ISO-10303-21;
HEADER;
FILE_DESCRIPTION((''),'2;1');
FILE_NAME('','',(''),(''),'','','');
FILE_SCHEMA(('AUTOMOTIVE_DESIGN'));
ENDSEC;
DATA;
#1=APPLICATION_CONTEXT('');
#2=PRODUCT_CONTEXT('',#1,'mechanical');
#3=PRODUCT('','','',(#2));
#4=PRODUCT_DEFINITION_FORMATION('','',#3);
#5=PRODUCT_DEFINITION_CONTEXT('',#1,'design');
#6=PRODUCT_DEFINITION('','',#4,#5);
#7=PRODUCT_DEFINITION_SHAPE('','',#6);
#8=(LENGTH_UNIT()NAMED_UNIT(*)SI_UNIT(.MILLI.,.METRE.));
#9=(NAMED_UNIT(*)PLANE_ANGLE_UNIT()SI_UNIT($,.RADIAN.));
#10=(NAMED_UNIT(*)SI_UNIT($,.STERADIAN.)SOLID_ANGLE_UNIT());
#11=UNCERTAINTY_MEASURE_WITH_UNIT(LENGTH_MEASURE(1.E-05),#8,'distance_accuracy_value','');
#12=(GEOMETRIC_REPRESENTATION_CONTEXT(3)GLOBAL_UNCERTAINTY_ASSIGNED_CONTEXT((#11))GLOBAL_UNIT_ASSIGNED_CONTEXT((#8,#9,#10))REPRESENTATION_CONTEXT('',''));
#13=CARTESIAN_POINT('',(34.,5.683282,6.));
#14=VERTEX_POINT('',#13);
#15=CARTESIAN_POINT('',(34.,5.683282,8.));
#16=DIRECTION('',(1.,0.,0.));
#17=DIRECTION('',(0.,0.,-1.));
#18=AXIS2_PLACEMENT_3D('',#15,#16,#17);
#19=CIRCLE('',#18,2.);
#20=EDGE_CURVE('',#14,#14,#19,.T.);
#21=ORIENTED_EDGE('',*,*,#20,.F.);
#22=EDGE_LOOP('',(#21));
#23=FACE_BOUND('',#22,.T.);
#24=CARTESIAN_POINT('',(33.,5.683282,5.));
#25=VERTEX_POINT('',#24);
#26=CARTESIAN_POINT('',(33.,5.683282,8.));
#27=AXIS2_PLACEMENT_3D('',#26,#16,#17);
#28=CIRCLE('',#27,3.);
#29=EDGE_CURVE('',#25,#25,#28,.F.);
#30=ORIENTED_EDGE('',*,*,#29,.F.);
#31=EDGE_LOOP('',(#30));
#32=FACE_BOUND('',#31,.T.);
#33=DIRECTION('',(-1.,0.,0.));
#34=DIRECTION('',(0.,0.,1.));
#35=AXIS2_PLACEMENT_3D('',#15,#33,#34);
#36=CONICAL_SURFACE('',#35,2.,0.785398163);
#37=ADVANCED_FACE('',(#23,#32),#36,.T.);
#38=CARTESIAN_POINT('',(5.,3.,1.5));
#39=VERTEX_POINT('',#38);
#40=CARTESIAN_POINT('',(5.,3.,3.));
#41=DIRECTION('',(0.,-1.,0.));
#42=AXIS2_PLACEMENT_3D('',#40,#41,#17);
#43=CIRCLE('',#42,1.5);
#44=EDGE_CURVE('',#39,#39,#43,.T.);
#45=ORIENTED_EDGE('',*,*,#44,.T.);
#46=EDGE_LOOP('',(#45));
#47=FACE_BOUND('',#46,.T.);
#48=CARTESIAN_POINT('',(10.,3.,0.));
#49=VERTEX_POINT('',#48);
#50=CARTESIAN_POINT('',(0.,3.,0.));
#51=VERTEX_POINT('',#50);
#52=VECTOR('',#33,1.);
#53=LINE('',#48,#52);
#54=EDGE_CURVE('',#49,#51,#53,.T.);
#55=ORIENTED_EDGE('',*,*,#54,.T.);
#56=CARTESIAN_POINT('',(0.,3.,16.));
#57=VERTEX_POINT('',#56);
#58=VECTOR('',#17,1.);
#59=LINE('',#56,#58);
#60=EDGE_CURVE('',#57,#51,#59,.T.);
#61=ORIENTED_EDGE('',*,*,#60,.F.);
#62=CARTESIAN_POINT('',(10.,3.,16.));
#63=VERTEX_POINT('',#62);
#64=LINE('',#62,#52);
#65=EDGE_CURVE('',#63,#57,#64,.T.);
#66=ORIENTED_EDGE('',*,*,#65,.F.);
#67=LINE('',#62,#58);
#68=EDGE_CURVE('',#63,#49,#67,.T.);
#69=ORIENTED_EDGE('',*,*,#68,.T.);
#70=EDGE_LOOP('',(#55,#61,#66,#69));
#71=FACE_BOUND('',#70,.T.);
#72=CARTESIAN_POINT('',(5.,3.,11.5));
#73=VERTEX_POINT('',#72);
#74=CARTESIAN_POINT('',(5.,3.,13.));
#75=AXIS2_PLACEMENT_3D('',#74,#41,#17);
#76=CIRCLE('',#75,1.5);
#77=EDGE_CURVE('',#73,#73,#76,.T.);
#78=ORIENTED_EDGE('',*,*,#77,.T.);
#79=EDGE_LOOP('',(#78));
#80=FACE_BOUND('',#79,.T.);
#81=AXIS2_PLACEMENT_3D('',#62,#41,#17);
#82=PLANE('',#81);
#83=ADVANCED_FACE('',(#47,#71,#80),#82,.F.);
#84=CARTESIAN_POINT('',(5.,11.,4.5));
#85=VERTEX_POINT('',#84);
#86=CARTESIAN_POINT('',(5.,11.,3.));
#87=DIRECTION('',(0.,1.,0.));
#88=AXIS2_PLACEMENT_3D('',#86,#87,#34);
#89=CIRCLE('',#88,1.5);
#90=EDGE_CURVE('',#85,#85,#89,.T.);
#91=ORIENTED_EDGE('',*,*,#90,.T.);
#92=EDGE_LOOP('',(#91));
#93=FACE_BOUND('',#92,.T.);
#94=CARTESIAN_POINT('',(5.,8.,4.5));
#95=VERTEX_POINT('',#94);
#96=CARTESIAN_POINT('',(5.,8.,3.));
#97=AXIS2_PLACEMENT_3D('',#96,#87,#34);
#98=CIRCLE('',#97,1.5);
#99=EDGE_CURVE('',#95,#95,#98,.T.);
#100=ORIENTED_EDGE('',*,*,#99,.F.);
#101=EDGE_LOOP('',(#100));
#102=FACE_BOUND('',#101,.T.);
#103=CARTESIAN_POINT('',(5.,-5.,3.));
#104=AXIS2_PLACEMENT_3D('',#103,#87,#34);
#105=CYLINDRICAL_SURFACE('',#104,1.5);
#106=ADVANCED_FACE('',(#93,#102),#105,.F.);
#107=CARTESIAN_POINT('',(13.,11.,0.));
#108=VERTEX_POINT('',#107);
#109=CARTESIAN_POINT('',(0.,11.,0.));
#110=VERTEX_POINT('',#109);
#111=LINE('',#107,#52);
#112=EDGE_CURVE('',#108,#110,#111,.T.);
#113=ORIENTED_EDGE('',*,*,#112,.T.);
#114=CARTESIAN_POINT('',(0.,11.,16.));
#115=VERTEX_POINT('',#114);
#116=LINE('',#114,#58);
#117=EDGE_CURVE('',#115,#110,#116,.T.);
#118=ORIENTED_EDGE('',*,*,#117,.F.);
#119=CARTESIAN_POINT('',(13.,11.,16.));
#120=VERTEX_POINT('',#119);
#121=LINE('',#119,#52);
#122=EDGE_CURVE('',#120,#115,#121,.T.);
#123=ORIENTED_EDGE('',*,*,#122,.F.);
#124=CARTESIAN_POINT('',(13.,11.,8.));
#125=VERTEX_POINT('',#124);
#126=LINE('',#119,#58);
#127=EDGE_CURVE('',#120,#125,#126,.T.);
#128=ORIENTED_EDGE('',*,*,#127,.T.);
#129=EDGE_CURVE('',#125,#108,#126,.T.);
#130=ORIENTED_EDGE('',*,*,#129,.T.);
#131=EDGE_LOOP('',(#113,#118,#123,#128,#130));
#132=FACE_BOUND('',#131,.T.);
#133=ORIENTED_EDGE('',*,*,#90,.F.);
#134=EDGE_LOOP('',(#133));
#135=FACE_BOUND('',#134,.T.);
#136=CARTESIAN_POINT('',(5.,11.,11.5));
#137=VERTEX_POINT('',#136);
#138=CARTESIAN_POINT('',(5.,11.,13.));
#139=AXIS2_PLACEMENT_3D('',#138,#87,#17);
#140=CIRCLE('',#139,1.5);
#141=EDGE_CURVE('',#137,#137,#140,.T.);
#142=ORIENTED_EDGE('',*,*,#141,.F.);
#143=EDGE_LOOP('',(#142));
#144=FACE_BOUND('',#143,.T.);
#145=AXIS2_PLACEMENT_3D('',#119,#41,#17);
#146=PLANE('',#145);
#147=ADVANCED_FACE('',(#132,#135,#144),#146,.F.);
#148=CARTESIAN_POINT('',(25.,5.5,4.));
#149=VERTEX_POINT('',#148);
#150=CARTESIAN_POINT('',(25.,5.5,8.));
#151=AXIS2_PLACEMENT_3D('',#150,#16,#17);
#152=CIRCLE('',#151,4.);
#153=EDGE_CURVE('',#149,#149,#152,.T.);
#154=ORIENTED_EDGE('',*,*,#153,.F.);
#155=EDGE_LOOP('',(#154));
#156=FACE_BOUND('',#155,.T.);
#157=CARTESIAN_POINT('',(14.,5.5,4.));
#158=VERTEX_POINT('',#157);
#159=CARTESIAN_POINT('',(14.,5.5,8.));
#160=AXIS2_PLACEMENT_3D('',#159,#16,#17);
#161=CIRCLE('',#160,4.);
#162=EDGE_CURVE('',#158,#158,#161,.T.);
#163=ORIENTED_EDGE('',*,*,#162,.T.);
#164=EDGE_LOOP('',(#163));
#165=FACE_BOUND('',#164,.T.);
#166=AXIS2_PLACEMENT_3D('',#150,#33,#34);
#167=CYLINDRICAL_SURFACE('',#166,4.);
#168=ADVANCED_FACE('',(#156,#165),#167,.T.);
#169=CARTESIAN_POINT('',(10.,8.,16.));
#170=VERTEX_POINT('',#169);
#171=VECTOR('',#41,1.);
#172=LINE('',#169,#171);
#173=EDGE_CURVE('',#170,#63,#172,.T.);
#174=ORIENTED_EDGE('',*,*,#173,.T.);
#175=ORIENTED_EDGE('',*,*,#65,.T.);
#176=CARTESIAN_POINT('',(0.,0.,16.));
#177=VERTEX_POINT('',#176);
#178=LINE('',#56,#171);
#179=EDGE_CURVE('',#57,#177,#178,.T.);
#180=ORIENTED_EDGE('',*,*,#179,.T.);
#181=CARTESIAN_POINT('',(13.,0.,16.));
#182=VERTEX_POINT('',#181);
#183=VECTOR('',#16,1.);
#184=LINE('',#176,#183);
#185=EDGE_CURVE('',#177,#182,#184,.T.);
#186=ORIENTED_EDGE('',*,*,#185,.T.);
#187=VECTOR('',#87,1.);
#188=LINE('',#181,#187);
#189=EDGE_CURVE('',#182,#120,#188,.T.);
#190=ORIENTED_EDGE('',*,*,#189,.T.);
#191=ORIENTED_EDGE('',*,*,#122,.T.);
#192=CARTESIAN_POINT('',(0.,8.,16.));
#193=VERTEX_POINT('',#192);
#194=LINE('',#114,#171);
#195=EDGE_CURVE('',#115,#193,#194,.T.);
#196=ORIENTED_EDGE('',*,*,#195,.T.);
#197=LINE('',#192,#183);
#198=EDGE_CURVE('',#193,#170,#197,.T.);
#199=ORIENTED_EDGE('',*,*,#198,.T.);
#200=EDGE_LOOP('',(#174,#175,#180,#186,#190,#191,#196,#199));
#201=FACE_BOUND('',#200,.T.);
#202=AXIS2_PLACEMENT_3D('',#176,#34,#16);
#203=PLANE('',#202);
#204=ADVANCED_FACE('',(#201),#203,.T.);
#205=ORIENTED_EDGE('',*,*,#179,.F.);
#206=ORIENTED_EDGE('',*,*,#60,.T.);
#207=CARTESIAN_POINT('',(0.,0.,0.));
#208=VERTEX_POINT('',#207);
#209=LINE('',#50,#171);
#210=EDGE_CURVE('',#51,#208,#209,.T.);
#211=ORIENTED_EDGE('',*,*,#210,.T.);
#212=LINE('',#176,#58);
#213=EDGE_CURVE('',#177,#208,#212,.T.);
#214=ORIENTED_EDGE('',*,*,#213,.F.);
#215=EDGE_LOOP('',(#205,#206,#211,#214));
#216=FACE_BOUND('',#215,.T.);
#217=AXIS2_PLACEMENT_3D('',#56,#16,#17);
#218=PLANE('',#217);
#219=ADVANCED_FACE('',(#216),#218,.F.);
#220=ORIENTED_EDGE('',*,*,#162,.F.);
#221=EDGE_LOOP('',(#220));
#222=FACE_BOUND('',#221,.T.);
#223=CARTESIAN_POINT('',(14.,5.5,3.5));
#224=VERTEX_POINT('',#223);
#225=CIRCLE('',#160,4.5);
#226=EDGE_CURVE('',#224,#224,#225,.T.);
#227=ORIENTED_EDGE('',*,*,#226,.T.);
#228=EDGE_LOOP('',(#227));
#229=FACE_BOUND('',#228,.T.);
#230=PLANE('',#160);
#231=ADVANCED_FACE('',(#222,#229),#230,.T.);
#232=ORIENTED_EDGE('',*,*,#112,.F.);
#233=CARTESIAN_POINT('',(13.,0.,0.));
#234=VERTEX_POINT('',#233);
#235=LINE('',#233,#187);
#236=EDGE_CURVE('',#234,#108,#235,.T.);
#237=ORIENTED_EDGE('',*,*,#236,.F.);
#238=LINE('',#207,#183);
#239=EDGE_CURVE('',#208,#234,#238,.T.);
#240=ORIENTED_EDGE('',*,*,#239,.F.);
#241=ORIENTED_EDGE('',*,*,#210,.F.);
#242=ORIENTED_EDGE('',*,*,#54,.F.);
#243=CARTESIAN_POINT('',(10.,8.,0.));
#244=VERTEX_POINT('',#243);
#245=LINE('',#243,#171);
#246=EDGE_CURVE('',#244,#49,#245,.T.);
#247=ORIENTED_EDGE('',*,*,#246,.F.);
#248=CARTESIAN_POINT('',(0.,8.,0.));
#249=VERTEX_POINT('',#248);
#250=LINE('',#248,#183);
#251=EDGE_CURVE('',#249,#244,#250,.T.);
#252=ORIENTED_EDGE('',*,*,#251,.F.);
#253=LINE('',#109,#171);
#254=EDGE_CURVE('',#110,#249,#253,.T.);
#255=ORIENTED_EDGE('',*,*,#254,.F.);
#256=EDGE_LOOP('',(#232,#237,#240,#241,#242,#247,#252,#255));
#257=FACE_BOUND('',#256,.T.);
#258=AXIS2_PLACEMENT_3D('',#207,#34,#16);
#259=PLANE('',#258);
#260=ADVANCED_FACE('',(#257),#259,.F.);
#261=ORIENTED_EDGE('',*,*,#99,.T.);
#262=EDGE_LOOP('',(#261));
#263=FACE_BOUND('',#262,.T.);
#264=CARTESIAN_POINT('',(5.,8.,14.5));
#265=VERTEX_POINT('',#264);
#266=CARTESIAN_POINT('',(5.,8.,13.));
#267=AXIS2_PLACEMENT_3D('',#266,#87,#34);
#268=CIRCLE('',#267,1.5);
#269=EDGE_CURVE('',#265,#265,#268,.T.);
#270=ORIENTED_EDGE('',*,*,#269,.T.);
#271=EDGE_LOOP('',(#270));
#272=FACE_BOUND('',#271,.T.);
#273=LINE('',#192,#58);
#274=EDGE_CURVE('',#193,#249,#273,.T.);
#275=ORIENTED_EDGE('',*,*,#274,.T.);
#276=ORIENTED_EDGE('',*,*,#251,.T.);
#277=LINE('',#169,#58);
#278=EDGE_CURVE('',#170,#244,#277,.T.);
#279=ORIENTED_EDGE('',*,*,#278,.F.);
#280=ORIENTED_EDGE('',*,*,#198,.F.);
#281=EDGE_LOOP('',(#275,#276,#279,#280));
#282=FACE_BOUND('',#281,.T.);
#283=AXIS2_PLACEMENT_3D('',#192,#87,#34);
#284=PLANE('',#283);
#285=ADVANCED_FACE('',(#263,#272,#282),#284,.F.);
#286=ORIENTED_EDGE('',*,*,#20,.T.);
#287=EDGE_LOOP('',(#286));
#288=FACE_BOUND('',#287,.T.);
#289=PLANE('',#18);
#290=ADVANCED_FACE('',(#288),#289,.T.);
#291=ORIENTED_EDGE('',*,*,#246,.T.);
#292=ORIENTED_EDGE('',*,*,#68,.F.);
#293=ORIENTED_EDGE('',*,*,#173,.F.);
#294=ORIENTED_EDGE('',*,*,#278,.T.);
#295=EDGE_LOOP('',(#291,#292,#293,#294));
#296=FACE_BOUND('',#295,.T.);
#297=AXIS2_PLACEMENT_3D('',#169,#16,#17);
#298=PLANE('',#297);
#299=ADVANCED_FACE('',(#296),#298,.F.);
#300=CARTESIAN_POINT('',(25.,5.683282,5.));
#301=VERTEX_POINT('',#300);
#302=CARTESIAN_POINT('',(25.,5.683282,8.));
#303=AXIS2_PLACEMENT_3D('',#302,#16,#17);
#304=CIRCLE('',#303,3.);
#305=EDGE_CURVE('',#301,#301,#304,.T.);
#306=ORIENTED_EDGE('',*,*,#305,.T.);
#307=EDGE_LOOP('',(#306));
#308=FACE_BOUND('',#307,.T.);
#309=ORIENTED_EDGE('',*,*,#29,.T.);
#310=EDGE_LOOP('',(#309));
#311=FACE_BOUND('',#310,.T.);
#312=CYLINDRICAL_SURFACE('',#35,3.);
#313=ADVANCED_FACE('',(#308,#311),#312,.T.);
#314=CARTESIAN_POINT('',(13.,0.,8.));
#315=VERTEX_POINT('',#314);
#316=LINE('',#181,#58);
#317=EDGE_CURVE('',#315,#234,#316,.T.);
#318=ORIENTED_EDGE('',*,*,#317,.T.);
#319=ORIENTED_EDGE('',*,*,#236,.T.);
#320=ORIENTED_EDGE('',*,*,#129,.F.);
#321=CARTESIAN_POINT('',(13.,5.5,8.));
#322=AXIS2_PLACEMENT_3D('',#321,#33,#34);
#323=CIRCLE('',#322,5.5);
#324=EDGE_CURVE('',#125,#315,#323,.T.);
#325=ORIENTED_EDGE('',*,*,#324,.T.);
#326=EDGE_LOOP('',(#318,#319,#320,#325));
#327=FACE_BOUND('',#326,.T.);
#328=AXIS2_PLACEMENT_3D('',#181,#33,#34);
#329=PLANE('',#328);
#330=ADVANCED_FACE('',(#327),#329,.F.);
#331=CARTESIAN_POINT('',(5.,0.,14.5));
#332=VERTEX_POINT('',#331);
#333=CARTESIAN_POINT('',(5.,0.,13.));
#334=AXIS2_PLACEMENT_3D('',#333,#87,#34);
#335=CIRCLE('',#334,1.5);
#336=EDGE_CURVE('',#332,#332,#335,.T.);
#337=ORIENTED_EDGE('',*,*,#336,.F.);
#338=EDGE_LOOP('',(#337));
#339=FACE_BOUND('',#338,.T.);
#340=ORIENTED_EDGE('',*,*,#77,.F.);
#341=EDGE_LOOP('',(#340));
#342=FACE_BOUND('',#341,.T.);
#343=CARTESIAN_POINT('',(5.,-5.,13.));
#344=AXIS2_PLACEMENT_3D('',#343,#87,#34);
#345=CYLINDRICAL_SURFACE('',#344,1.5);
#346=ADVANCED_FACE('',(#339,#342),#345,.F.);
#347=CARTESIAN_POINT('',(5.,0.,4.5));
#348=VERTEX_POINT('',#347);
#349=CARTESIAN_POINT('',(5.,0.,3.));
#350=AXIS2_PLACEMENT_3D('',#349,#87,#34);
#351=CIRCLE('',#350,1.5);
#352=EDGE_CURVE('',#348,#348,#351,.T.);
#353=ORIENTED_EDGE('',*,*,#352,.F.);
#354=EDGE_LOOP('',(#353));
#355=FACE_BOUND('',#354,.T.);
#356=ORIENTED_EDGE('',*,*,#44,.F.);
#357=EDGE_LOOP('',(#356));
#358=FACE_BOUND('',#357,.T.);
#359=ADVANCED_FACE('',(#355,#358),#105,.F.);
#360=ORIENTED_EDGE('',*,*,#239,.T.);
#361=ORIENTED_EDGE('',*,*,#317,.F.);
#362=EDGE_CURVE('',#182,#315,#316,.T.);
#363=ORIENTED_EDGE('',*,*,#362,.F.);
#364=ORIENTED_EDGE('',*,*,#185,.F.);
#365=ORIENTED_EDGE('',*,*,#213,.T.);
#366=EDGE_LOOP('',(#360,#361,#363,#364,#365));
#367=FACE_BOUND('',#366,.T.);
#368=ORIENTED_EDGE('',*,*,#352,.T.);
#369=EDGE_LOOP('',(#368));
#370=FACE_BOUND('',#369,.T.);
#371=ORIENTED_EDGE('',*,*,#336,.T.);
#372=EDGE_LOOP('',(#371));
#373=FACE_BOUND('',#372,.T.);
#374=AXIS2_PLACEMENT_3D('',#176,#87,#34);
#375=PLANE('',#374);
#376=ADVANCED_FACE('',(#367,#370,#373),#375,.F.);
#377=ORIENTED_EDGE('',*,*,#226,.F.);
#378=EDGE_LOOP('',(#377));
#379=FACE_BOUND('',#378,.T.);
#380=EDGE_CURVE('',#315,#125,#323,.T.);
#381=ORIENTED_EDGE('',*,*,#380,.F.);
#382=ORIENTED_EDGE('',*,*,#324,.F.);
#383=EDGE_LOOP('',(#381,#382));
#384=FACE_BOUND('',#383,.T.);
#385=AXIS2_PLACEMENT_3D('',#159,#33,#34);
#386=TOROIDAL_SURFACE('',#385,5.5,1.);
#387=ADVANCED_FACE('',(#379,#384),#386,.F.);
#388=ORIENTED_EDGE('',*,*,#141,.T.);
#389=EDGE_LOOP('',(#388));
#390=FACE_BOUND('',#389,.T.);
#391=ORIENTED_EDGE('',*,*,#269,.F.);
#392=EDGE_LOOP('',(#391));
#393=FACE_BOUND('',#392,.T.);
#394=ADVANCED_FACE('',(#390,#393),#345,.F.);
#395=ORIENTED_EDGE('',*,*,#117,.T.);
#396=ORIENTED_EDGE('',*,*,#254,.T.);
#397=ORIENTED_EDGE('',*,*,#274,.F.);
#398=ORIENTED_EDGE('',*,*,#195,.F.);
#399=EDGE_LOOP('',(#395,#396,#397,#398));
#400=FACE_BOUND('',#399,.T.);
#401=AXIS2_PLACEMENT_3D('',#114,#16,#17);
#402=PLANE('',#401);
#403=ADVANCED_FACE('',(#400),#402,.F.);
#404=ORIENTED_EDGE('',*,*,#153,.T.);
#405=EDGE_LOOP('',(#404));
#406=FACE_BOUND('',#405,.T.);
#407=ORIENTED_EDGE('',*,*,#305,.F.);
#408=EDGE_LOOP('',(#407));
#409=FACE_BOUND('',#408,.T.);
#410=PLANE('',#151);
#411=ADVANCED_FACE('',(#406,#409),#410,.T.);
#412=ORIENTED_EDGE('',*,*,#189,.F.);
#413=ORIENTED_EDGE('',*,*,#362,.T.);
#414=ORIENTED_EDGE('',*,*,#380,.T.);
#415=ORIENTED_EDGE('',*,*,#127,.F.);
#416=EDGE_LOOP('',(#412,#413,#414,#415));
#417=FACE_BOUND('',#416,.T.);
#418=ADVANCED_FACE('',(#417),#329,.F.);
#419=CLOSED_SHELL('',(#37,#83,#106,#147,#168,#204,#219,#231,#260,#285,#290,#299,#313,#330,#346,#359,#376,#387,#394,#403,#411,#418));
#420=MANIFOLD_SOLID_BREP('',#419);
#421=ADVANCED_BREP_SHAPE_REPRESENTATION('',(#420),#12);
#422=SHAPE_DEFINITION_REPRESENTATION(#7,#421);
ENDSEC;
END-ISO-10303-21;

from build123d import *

# Parameters (mm, degrees)
EXTRUDE_1_DEPTH     = 16
SKETCH_2_R          = 1.5
CUT_EXTRUDE_1_DEPTH = 16
SKETCH_3_R          = 4.5
EXTRUDE_2_DEPTH     = 1
FILLET_1_R          = 1
SKETCH_4_R          = 4
EXTRUDE_3_DEPTH     = 11
SKETCH_5_R          = 3
EXTRUDE_4_DEPTH     = 9
CHAMFER_1_SIZE      = 1


with BuildPart() as part:
    # 草图1 → 凸台-拉伸1 (new body)
    with BuildSketch(Plane.XY):
        Polygon((0, 0), (13, 0), (13, 11), (0, 11), (0, 8), (10, 8), (10, 3), (0, 3), align=None)
    extrude(amount=EXTRUDE_1_DEPTH)

    # 草图2 → 切除-拉伸1 (cut)
    with BuildSketch(Plane(origin=(0, 11, 0), x_dir=(1, 0, 0), z_dir=(0, 1, 0))):
        with Locations(Location((5, -3, 0), (0, 0, 270))):
            Circle(SKETCH_2_R)
        with Locations(Location((5, -13, 0), (0, 0, 270))):
            Circle(SKETCH_2_R)
    extrude(amount=-CUT_EXTRUDE_1_DEPTH, mode=Mode.SUBTRACT)

    # 草图3 → 凸台-拉伸2 (add)
    with BuildSketch(Plane(origin=(13, 0, 0), x_dir=(0, 0, -1), z_dir=(1, 0, 0))):
        with Locations((-8, 5.5)):
            Circle(SKETCH_3_R)
    extrude(amount=EXTRUDE_2_DEPTH)

    # 圆角1
    fillet_1_edges = [part.edges().sort_by_distance(p)[0] for p in [
        (13, 5.5, 12.5),
    ]]
    fillet(fillet_1_edges, radius=FILLET_1_R - 0.0001)  # a hair under: the kernel refuses the full size

    # 草图4 → 凸台-拉伸3 (add)
    with BuildSketch(Plane(origin=(14, 0, 0), x_dir=(0, 0, -1), z_dir=(1, 0, 0))):
        with Locations((-8, 5.5)):
            Circle(SKETCH_4_R)
    extrude(amount=EXTRUDE_3_DEPTH)

    # 草图5 → 凸台-拉伸4 (add)
    with BuildSketch(Plane(origin=(25, 0, 0), x_dir=(0, 0, -1), z_dir=(1, 0, 0))):
        with Locations((-8, 5.683281664)):
            Circle(SKETCH_5_R)
    extrude(amount=EXTRUDE_4_DEPTH)

    # 倒角1
    chamfer_1_edges = [part.edges().sort_by_distance(p)[0] for p in [
        (34, 5.683281664, 11),
    ]]
    chamfer(chamfer_1_edges, length=CHAMFER_1_SIZE)


solid = part.part
